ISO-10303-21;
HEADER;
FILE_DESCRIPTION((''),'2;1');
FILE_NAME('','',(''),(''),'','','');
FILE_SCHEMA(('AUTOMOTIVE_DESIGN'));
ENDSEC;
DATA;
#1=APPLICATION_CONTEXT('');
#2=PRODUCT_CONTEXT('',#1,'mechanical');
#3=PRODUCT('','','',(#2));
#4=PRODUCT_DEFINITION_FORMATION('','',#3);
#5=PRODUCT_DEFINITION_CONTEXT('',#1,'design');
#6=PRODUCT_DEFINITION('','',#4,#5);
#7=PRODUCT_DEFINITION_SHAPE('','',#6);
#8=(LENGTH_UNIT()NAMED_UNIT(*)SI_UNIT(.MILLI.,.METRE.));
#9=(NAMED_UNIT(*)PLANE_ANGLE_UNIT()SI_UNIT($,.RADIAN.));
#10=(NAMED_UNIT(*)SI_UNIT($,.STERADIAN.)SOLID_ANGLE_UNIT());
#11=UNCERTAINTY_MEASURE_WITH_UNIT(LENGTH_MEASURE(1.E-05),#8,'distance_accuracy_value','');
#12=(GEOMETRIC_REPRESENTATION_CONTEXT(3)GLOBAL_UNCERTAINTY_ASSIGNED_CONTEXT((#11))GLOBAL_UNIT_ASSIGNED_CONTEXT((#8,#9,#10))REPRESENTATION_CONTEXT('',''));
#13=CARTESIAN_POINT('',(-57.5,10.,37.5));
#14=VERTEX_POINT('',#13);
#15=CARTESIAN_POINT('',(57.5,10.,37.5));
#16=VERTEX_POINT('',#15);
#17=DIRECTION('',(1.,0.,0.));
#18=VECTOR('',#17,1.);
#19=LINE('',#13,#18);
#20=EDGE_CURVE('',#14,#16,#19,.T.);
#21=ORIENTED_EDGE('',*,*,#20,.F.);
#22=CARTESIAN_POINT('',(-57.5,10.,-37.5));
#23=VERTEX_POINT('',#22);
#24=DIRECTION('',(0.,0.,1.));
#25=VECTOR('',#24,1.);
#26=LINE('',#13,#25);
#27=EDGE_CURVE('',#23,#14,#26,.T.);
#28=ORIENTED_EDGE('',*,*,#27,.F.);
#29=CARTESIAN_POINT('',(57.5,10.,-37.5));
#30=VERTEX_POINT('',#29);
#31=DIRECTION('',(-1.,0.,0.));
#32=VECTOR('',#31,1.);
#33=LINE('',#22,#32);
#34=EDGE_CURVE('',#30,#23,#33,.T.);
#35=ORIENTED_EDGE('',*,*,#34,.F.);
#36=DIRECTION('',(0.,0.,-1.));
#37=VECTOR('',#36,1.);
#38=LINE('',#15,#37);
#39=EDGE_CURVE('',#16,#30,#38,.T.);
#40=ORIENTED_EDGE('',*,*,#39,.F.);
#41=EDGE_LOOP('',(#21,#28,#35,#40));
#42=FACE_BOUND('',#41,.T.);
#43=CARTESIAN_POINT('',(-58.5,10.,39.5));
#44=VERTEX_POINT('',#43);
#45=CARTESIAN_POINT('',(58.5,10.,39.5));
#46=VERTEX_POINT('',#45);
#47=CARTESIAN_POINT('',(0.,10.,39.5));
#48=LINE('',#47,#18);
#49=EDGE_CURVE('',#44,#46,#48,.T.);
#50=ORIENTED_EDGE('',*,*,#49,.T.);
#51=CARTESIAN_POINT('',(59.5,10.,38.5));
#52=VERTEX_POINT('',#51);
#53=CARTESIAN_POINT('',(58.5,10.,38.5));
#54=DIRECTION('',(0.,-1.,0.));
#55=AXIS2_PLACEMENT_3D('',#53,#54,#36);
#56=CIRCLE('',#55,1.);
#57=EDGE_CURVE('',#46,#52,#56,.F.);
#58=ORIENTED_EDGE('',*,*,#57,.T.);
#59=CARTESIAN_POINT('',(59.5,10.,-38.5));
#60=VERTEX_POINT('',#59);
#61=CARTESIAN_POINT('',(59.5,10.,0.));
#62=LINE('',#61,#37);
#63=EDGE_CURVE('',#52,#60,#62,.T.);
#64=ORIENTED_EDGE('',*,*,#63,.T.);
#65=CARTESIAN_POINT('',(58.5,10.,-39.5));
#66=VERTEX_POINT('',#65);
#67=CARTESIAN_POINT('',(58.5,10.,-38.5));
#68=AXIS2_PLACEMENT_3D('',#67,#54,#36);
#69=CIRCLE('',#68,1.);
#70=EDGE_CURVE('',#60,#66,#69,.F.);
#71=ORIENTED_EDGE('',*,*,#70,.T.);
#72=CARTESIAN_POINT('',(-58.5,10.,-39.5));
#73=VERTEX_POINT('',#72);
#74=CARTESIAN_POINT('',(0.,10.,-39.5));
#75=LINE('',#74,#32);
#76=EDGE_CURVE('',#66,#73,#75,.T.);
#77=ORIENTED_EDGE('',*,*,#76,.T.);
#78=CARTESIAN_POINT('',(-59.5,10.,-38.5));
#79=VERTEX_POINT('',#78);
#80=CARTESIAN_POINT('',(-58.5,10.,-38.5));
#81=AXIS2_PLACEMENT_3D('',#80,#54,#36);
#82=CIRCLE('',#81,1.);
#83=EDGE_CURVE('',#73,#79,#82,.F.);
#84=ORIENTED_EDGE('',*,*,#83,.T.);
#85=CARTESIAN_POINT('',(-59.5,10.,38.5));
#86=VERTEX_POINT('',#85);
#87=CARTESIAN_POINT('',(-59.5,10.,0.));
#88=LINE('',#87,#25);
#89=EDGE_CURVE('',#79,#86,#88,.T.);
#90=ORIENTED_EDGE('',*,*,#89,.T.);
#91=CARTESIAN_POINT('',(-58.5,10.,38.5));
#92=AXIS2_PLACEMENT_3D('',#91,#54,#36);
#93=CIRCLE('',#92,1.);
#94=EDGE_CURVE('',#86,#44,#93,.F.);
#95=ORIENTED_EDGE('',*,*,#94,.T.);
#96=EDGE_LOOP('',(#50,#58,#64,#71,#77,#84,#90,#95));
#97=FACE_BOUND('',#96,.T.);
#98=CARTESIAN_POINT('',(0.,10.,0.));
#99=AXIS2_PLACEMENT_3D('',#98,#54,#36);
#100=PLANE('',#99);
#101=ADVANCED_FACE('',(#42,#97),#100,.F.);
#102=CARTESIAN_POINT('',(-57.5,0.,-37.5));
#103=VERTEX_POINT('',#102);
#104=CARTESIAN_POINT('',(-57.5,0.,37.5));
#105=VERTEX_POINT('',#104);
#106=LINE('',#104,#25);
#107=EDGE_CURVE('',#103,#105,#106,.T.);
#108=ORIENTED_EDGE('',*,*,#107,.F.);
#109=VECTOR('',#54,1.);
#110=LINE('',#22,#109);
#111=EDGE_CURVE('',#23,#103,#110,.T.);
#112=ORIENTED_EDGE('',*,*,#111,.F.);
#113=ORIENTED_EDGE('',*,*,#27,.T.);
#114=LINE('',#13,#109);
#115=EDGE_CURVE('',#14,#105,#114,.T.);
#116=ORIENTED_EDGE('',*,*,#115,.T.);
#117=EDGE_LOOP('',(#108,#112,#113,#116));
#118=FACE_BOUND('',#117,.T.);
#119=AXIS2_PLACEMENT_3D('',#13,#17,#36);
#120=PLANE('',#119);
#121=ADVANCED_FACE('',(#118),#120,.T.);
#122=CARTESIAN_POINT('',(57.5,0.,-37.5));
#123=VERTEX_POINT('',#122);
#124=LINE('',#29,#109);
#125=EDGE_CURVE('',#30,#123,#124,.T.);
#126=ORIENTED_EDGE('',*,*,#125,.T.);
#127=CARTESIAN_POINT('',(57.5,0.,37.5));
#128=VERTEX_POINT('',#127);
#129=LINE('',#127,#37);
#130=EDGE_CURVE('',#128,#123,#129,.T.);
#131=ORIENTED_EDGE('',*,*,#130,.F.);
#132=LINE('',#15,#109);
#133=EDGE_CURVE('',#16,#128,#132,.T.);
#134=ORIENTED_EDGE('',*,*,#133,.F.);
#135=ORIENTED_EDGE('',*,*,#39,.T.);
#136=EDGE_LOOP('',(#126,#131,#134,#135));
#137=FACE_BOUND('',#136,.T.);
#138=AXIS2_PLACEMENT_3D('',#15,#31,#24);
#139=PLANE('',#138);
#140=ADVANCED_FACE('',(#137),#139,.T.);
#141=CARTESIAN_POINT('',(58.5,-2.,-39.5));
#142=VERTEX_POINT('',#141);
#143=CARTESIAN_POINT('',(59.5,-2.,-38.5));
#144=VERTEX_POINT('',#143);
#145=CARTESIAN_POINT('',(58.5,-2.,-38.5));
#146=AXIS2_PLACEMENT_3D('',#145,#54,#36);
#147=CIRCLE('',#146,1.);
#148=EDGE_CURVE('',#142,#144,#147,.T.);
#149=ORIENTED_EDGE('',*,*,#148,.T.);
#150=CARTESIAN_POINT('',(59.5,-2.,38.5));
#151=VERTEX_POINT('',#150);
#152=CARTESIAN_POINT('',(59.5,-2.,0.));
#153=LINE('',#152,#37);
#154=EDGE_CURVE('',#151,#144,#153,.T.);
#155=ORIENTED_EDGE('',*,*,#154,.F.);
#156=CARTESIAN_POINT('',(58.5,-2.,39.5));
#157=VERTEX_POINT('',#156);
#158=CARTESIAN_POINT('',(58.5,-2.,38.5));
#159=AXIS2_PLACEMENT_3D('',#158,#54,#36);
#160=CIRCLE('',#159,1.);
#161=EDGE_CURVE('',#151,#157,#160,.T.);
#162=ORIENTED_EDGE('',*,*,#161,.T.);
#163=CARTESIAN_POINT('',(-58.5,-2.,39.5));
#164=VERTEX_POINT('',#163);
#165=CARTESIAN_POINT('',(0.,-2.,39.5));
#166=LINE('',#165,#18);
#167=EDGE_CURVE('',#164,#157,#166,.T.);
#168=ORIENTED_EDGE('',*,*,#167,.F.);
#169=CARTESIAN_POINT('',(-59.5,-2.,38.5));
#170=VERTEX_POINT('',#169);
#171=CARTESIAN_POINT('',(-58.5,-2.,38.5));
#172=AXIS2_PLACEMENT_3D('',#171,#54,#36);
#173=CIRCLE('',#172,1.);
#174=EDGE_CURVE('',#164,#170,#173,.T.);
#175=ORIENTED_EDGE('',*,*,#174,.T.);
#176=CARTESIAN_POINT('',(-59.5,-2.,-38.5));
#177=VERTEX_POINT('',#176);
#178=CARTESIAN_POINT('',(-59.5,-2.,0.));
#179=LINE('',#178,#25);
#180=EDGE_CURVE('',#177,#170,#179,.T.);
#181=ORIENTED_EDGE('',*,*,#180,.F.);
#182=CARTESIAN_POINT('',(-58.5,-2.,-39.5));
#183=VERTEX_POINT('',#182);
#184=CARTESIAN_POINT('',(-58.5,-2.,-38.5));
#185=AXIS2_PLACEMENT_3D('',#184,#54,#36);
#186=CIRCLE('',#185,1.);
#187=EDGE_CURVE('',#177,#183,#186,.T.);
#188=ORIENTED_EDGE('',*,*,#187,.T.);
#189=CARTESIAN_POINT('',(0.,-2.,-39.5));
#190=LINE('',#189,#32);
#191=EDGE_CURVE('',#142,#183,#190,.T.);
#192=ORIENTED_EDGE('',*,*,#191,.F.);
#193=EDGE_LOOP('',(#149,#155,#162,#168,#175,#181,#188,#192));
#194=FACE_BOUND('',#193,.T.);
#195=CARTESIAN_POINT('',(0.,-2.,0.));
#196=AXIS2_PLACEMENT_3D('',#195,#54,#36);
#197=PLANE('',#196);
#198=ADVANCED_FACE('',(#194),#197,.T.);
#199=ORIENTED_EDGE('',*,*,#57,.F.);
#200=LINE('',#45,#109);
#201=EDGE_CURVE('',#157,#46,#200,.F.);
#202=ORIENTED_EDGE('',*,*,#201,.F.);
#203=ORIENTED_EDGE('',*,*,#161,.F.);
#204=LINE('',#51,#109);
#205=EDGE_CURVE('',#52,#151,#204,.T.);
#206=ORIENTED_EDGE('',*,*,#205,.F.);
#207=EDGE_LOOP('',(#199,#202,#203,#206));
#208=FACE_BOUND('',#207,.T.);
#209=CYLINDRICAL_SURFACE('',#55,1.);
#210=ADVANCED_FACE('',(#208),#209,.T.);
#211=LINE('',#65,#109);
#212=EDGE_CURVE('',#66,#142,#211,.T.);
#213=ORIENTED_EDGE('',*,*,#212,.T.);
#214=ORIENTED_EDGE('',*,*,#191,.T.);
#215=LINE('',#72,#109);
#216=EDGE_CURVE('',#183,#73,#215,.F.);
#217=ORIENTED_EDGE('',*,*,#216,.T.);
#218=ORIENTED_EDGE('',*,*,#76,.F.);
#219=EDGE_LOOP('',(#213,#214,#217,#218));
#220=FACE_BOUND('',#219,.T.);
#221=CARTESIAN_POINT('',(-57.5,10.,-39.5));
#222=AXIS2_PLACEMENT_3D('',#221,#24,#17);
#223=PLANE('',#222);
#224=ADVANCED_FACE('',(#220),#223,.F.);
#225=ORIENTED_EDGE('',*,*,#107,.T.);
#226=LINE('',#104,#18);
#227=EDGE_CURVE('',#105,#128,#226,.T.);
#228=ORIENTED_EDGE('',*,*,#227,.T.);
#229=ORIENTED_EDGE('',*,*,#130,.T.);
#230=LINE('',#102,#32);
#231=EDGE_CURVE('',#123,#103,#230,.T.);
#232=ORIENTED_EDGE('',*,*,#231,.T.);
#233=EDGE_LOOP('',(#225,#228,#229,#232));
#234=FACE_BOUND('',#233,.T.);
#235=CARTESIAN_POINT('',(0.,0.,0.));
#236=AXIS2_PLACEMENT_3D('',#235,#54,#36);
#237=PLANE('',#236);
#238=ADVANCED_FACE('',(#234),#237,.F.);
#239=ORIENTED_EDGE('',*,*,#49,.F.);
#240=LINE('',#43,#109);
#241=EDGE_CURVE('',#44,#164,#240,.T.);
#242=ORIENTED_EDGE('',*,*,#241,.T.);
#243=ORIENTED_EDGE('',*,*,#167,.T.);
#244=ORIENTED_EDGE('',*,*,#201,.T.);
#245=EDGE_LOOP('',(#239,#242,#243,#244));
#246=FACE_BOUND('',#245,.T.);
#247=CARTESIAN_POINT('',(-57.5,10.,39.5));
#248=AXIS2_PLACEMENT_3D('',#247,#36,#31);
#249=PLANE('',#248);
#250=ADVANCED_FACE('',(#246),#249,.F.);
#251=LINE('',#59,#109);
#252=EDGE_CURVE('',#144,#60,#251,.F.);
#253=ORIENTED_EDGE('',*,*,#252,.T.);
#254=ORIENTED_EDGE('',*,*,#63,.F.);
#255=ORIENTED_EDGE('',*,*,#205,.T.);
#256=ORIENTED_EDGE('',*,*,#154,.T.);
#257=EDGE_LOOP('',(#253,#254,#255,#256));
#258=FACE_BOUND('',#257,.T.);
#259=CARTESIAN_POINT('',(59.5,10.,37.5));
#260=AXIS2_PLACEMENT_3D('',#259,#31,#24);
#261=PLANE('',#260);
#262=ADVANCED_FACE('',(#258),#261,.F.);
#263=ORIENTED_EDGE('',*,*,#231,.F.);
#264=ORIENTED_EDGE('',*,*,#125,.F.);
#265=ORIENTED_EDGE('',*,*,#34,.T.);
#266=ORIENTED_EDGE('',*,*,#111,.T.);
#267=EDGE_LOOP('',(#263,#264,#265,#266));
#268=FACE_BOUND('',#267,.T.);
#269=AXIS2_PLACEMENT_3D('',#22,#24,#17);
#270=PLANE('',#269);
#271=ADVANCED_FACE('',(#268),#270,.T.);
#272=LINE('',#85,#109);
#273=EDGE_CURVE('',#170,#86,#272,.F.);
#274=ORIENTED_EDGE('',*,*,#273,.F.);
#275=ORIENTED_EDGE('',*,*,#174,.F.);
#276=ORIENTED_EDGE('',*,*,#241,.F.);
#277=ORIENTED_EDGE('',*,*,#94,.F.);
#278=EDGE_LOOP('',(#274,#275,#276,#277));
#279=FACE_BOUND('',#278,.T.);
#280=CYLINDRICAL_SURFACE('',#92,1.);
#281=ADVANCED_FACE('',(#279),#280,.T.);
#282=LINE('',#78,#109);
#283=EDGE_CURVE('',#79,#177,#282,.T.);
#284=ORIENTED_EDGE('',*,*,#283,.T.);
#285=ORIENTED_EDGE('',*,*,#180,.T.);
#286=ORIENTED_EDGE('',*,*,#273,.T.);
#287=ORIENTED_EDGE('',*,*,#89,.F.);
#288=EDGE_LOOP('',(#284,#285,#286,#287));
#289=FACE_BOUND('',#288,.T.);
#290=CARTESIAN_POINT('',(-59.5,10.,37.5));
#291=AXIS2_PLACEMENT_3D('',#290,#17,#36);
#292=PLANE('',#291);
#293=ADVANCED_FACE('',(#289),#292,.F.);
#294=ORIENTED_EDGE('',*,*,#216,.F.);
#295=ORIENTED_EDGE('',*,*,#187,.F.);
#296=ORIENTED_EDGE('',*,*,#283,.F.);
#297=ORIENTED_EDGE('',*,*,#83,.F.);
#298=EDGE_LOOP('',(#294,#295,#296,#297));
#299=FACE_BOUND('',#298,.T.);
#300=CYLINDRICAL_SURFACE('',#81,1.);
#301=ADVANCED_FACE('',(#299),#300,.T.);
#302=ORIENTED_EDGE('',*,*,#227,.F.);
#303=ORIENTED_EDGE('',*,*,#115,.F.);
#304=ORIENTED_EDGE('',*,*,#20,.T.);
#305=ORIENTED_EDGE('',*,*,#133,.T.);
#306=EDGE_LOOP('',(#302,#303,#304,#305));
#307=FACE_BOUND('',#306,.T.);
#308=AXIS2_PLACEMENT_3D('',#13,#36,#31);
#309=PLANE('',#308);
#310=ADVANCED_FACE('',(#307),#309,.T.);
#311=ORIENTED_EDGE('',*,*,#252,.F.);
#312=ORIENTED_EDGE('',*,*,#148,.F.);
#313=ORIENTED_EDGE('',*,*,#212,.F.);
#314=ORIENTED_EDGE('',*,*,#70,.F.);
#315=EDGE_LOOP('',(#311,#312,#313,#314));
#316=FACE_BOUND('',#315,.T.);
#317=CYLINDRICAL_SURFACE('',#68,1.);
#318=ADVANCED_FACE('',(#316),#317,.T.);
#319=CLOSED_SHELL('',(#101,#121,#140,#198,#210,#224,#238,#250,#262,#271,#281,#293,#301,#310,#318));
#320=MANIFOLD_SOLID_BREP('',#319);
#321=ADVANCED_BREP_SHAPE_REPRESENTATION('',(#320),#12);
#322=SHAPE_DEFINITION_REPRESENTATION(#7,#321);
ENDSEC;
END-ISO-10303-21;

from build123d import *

# Parameters (mm, degrees)
SKETCH1_W           = 115
SKETCH1_H           = 75
BOSS_EXTRUDE1_DEPTH = 10
SHELL1_T            = 2
FILLET1_R           = 1


with BuildPart() as part:
    # Sketch1 → Boss-Extrude1 (new body)
    with BuildSketch(Plane(origin=(0, 0, 0), x_dir=(1, 0, 0), z_dir=(0, 1, 0))):
        Rectangle(SKETCH1_W, SKETCH1_H)
    extrude(amount=BOSS_EXTRUDE1_DEPTH)

    # Shell1
    shell1_openings = [part.faces().sort_by_distance(p)[0] for p in [
        (0, 10, 0),
    ]]
    offset(amount=SHELL1_T, openings=shell1_openings, kind=Kind.INTERSECTION)

    # Fillet1
    # the kernel refuses this fillet: 1 mm, written as the material it takes off along each edge
    with BuildSketch(Plane(origin=(59.5, -4.5, 39.5), x_dir=(-1, 0, 0), z_dir=(0, 1, 0)), Plane(origin=(-59.5, 12.5, 39.5), x_dir=(1, 0, 0), z_dir=(0, -1, 0)), Plane(origin=(-59.5, -4.5, -39.5), x_dir=(1, 0, 0), z_dir=(0, 1, 0)), Plane(origin=(59.5, -4.5, -39.5), x_dir=(0, 0, 1), z_dir=(0, 1, 0))) as fillet1_piece_1:
        with BuildLine():
            CenterArc((FILLET1_R, -FILLET1_R), FILLET1_R, 90, 90)
            Line((0, -FILLET1_R), (0, 0))
            Line((0, 0), (FILLET1_R, 0))
        make_face()
    extrude(amount=17, mode=Mode.SUBTRACT)


solid = part.part
